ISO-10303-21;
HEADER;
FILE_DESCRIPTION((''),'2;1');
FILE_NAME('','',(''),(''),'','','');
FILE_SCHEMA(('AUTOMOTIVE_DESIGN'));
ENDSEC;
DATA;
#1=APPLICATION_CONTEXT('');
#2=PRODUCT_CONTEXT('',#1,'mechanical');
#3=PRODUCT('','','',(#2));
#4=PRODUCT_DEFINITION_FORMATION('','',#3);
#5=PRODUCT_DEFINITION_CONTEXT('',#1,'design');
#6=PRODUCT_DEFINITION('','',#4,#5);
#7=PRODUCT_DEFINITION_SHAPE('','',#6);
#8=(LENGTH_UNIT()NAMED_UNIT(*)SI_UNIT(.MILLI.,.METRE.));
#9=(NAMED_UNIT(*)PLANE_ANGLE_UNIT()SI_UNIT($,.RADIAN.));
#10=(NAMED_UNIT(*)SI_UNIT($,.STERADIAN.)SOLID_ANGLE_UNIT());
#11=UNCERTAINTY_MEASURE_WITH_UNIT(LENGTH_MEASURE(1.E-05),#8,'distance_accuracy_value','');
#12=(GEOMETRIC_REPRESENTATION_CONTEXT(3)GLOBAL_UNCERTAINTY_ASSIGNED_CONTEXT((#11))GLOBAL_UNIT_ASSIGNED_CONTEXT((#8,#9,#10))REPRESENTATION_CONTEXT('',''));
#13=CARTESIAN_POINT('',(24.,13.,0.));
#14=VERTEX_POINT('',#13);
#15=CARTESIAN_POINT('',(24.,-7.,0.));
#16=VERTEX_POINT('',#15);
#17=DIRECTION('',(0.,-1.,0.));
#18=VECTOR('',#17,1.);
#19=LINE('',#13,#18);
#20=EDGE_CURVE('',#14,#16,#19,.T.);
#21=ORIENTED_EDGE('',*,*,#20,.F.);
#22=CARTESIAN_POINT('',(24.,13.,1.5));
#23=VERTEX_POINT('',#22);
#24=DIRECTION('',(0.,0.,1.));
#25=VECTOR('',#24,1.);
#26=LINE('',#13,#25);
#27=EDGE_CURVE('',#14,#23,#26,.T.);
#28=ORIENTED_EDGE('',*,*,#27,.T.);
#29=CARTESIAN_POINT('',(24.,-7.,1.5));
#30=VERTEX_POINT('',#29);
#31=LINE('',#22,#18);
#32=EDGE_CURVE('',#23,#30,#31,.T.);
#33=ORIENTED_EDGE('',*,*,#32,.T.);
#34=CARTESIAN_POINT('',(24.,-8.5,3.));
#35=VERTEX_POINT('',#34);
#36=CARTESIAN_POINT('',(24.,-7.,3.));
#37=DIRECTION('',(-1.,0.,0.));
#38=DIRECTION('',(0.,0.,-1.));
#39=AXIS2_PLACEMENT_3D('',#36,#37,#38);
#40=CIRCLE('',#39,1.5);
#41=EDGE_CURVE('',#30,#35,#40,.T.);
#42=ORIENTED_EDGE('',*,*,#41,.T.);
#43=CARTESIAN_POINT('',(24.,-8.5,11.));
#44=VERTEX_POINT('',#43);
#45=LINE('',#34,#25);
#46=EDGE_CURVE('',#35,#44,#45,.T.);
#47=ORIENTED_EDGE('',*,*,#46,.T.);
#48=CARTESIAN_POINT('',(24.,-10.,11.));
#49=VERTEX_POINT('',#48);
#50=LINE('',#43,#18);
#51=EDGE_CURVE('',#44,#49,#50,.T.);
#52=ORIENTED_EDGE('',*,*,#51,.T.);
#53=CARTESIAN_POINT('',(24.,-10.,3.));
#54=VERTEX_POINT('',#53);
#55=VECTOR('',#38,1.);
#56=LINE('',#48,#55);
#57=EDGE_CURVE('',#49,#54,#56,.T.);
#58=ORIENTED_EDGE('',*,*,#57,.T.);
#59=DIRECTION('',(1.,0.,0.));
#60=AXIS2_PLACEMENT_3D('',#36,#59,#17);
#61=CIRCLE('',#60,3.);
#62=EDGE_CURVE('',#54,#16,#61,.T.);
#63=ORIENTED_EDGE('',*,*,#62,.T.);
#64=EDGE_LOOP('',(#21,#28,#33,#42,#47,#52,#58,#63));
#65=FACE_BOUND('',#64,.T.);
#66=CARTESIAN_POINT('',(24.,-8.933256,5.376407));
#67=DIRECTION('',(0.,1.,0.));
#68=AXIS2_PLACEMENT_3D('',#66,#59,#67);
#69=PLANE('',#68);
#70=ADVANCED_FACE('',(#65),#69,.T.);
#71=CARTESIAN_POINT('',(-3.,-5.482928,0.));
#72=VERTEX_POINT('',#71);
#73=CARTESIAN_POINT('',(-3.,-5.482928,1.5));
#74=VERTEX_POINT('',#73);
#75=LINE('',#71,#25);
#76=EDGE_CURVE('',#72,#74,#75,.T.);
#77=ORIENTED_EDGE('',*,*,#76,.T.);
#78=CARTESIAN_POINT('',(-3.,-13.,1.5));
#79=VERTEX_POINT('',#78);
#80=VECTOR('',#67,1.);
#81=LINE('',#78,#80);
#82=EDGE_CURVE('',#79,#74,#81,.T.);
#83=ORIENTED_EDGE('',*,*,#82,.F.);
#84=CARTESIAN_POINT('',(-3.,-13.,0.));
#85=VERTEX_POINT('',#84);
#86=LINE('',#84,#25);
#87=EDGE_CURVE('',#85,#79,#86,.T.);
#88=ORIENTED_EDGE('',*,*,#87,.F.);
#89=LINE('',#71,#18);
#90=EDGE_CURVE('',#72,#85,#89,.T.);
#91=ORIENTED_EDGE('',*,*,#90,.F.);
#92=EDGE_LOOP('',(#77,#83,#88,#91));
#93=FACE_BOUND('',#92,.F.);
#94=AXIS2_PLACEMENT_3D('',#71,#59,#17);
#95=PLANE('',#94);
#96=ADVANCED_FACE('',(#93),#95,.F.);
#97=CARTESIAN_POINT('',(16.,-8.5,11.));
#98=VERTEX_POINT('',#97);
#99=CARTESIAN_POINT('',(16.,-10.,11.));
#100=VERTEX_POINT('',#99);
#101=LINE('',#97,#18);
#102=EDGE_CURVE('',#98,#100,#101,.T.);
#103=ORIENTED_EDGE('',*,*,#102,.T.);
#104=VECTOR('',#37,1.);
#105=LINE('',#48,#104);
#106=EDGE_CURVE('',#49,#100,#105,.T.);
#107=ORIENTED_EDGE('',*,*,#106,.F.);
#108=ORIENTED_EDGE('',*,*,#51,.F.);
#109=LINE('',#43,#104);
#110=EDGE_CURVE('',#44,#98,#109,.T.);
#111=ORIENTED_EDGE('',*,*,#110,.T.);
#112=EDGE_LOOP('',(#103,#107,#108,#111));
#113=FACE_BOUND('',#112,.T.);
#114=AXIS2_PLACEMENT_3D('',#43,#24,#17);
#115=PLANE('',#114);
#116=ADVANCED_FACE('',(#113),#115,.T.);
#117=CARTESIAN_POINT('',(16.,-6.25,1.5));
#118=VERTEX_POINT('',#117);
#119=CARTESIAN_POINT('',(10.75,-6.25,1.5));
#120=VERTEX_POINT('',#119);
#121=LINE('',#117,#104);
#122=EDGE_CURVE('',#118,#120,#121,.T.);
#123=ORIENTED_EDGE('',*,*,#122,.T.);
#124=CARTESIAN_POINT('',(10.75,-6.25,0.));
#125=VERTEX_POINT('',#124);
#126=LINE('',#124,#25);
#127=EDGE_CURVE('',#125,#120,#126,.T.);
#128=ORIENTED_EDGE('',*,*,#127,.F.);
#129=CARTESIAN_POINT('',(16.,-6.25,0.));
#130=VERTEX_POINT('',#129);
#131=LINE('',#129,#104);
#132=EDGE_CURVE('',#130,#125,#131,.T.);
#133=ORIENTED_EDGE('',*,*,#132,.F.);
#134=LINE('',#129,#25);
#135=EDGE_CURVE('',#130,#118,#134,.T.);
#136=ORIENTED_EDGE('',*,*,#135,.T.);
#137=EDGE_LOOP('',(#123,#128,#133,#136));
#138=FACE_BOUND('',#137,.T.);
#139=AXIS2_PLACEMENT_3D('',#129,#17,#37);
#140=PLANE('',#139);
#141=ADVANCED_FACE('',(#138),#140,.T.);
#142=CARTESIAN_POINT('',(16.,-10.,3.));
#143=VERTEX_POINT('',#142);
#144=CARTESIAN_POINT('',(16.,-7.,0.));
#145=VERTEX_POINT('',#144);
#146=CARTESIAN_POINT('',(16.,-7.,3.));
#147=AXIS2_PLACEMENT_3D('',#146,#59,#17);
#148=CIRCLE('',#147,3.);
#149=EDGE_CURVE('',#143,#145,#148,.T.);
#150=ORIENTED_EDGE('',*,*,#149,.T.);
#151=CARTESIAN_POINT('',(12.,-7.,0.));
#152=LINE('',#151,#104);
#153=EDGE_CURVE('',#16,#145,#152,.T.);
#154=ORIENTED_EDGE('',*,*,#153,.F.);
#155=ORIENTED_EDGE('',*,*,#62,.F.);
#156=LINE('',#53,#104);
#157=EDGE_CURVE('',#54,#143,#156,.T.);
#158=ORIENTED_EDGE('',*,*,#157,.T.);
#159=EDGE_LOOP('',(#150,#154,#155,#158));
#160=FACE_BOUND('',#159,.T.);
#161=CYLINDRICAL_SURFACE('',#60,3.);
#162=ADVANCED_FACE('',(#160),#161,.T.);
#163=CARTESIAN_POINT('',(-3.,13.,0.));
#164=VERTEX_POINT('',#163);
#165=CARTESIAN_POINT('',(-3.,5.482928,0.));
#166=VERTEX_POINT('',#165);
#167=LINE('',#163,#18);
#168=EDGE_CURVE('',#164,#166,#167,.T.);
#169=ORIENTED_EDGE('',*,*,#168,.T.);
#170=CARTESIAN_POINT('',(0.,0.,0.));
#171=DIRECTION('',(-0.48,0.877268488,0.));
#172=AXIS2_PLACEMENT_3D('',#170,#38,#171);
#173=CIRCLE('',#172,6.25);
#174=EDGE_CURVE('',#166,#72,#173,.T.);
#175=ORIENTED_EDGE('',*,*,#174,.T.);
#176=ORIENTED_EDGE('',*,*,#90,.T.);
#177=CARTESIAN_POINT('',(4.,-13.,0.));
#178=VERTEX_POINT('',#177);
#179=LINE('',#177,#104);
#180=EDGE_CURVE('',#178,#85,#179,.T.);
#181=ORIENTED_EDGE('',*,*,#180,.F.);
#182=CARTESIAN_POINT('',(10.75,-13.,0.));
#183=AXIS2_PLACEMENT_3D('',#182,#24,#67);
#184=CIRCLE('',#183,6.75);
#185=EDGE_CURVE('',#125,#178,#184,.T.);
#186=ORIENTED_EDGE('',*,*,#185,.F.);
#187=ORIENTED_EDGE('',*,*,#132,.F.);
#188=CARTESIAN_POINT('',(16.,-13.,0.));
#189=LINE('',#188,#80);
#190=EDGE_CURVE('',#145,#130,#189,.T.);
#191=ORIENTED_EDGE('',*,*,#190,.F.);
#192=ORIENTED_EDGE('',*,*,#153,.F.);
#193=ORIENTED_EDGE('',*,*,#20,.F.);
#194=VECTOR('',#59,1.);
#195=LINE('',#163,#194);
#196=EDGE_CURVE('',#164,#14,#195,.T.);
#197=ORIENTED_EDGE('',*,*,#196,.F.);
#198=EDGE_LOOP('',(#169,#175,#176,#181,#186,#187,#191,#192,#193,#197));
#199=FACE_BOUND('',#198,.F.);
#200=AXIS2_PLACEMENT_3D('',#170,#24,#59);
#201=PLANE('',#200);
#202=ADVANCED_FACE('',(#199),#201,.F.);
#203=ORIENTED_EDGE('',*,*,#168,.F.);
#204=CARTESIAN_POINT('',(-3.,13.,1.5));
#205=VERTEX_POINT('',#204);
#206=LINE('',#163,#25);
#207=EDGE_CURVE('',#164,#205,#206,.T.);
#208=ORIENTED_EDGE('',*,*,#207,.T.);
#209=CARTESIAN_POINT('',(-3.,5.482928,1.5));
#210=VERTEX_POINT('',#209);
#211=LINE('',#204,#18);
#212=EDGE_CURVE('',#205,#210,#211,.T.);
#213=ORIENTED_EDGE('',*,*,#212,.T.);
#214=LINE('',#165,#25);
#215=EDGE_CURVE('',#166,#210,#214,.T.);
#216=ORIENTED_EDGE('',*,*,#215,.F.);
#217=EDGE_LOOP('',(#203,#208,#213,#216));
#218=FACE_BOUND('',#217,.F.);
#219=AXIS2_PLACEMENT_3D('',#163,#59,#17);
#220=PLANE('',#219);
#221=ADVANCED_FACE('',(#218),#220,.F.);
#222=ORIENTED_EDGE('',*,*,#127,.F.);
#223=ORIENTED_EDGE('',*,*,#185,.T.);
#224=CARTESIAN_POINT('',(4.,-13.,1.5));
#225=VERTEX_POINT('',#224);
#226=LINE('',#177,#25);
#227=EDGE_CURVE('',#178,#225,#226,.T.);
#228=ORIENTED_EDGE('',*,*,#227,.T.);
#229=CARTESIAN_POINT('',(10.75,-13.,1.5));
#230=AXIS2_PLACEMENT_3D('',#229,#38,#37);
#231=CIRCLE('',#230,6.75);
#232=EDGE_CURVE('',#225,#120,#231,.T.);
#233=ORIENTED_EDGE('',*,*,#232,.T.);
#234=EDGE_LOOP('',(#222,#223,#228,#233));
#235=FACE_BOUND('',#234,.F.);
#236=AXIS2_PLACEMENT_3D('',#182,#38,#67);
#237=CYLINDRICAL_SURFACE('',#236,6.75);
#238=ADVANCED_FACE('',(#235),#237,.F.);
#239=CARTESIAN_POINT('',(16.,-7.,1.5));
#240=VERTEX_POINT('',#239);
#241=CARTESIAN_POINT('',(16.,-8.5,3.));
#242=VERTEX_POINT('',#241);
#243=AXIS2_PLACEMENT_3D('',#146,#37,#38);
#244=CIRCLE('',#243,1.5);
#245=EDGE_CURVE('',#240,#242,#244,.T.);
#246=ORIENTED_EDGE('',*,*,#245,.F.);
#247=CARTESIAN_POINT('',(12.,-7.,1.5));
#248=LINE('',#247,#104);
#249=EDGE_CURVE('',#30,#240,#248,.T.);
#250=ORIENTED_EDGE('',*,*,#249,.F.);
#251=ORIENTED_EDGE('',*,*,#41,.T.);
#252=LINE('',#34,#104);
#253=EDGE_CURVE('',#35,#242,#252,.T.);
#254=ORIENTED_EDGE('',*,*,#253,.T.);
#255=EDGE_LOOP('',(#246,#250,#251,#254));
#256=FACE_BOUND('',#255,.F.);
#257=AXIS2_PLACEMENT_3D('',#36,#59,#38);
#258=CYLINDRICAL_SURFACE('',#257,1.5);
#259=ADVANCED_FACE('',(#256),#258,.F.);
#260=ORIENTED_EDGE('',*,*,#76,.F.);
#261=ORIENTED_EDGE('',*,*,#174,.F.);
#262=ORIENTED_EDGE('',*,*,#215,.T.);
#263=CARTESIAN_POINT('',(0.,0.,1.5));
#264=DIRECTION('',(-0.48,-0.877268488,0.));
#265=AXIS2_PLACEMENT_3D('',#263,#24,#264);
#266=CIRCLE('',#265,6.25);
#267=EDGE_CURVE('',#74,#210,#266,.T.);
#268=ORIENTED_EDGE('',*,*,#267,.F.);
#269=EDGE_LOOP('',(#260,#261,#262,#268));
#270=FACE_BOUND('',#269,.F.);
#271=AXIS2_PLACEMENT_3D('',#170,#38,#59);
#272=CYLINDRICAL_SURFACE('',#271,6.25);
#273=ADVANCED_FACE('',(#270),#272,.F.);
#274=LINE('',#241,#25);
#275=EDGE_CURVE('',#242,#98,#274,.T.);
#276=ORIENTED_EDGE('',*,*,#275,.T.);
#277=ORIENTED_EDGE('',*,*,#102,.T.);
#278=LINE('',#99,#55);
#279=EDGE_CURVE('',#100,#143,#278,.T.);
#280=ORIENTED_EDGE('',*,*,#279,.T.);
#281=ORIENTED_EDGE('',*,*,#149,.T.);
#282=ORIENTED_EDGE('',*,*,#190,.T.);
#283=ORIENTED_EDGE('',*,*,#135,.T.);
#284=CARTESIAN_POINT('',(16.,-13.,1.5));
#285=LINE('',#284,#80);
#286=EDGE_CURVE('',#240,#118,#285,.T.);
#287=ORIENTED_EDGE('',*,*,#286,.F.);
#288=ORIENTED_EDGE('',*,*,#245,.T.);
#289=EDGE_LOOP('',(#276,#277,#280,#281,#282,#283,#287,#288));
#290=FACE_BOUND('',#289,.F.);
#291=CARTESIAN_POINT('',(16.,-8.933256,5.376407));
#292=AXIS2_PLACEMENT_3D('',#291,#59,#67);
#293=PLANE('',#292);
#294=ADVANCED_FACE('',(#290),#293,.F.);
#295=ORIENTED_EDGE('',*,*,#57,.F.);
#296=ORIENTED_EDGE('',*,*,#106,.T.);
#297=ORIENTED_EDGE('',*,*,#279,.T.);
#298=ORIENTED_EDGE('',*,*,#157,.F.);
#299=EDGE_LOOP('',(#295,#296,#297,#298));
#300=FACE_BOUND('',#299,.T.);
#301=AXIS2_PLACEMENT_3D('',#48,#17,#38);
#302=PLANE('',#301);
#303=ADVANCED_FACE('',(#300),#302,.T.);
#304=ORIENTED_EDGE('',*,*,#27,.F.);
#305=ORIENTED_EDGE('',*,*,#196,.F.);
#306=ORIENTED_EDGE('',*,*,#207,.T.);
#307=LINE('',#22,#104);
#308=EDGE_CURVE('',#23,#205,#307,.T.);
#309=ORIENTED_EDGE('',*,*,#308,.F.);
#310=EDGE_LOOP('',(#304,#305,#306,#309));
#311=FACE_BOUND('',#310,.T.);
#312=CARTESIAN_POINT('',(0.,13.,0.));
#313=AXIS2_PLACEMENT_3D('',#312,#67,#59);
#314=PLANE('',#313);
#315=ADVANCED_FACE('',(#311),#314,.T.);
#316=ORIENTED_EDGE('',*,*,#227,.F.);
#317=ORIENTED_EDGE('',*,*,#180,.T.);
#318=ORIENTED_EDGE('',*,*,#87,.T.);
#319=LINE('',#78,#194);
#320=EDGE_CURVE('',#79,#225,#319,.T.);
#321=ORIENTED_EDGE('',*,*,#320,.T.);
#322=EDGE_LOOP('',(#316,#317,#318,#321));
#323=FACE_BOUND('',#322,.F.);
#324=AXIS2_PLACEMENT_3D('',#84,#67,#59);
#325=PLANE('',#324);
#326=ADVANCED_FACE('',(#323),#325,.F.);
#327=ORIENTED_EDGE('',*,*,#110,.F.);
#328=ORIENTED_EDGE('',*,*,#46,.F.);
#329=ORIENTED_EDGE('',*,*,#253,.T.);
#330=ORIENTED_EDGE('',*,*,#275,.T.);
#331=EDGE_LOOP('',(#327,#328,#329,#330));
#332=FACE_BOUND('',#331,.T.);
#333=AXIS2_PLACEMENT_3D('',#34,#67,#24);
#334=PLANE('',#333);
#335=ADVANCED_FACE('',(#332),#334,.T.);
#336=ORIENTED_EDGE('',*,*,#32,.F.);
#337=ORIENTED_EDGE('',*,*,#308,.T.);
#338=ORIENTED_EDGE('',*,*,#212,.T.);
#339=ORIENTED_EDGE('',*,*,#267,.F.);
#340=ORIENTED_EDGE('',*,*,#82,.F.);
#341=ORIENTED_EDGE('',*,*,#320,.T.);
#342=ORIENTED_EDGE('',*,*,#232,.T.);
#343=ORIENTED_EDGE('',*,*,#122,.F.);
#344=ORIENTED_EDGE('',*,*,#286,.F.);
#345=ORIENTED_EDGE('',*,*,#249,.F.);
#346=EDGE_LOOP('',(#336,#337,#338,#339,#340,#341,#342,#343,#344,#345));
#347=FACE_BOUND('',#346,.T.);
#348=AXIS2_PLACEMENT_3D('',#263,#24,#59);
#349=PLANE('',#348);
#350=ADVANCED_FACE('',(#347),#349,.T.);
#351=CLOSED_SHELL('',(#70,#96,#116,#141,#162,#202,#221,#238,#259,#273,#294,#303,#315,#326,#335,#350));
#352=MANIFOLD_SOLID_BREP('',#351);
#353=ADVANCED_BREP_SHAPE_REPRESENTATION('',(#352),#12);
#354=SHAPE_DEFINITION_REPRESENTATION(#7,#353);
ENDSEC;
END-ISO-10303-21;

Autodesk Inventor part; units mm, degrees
ref_plane "YZ Plane" through (0, 0, 0) normal (1, 0, 0) x (0, 1, 0)
ref_plane "XZ Plane" through (0, 0, 0) normal (0, 1, 0) x (-1, 0, 0)
ref_plane "XY Plane" through (0, 0, 0) normal (0, 0, 1) x (1, 0, 0)
sketch "スケッチ1" plane through (0, 0, 0) normal (0, 0, 1) x (1, 0, 0)
  circle A0 centre (0, 0) radius 6.25
  line L0 (0, 13) -> (24, 13)
  line L1 (24, 13) -> (24, -13)
  line L2 (24, -13) -> (0, -13)
  line L3 (0, -13) -> (0, 13)
  line L4 (0, 13) -> (-3, 13)
  line L5 (-3, 13) -> (-3, -13)
  line L6 (-3, -13) -> (0, -13)
  line L7 (0, -13) -> (0, 13)
  line L8 (16, -13) -> (16, -6.25)
  line L9 (16, -6.25) -> (0, -6.25)
  line L10 (-3, -10) -> (24, -10)
  arc A1 (10.75, -6.25) -> (4, -13) centre (10.75, -13) ccw
  line L11 (4, -13) -> (4, -9.651) construction
  point P0 (24, 0)
  point P1 (-3, 5.4829)
  point P2 (-3, -5.4829)
  point P3 (0, 0)
  point P4 (16, -10)
  point P5 (4.7033, -10)
  dimension "d0" = 12.5
  dimension "d1" = 24
  dimension "d2" = 26
  dimension "d3" = 3
  dimension "d5" = 8
  dimension "d16" = 3
  dimension "d17" = 7
extrude "プレート1" add sketch "スケッチ1" along normal blind 1.5 contours L3 L10 L5 A0 | L9 A1 L10 L3 | A0 L3 L0 L1 L10 L8 L9 | L10 A1 L2 L3 | L3 L6 L5 L10 | A0 L5 L4 L3
sketch "スケッチ2" plane through (24, -8.5, 0) normal (0, -1, 0) x (1, 0, 0)
  line L0 (-8, 0) -> (0, 0)
  line L1 (0, 0) -> (0, 11)
  line L2 (0, 11) -> (-8, 11)
  line L3 (-8, 11) -> (-8, 0)
edge flange "フランジ1" height 11 angle 90 thickness 1.5 bend radius 1.5 thickness toward (0, -1, 0) relief tear relief width 1.5 relief depth 0.75 edges at (20, -10, 1.5) wall of the first edge with corners at (16, -8.5, 0) (24, -8.5, 0) (24, -8.5, 11) (16, -8.5, 11)
bend "曲げ1"
corner "コーナー1"
equation "\"d4\" = Thickness"
equation "\"d6\" = BendReliefWidth"
equation "\"d7\" = BendReliefDepth"
equation "\"d8\" = MinimumRemnant"
equation "\"d9\" = TransitionRadius"
equation "\"d12\" = BendRadius"
equation "\"d13\" = CornerReliefSize"
equation "\"d14\" = GapSize"
equation "\"d15\" = JacobiRadiusSize"
equation "\"BendRadius\" = Thickness"
equation "\"BendReliefWidth\" = Thickness"
equation "\"BendReliefDepth\" = 0.5 * Thickness"
equation "\"CornerReliefSize\" = 4 * Thickness"
equation "\"MinimumRemnant\" = 2 * Thickness"
equation "\"TransitionRadius\" = BendRadius"
equation "\"JacobiRadiusSize\" = BendRadius"
equation "\"GapSize\" = Thickness"
equation "\"Thickness\" = 1.5"
properties part number "hipjoint_toleg_under_up_right"
